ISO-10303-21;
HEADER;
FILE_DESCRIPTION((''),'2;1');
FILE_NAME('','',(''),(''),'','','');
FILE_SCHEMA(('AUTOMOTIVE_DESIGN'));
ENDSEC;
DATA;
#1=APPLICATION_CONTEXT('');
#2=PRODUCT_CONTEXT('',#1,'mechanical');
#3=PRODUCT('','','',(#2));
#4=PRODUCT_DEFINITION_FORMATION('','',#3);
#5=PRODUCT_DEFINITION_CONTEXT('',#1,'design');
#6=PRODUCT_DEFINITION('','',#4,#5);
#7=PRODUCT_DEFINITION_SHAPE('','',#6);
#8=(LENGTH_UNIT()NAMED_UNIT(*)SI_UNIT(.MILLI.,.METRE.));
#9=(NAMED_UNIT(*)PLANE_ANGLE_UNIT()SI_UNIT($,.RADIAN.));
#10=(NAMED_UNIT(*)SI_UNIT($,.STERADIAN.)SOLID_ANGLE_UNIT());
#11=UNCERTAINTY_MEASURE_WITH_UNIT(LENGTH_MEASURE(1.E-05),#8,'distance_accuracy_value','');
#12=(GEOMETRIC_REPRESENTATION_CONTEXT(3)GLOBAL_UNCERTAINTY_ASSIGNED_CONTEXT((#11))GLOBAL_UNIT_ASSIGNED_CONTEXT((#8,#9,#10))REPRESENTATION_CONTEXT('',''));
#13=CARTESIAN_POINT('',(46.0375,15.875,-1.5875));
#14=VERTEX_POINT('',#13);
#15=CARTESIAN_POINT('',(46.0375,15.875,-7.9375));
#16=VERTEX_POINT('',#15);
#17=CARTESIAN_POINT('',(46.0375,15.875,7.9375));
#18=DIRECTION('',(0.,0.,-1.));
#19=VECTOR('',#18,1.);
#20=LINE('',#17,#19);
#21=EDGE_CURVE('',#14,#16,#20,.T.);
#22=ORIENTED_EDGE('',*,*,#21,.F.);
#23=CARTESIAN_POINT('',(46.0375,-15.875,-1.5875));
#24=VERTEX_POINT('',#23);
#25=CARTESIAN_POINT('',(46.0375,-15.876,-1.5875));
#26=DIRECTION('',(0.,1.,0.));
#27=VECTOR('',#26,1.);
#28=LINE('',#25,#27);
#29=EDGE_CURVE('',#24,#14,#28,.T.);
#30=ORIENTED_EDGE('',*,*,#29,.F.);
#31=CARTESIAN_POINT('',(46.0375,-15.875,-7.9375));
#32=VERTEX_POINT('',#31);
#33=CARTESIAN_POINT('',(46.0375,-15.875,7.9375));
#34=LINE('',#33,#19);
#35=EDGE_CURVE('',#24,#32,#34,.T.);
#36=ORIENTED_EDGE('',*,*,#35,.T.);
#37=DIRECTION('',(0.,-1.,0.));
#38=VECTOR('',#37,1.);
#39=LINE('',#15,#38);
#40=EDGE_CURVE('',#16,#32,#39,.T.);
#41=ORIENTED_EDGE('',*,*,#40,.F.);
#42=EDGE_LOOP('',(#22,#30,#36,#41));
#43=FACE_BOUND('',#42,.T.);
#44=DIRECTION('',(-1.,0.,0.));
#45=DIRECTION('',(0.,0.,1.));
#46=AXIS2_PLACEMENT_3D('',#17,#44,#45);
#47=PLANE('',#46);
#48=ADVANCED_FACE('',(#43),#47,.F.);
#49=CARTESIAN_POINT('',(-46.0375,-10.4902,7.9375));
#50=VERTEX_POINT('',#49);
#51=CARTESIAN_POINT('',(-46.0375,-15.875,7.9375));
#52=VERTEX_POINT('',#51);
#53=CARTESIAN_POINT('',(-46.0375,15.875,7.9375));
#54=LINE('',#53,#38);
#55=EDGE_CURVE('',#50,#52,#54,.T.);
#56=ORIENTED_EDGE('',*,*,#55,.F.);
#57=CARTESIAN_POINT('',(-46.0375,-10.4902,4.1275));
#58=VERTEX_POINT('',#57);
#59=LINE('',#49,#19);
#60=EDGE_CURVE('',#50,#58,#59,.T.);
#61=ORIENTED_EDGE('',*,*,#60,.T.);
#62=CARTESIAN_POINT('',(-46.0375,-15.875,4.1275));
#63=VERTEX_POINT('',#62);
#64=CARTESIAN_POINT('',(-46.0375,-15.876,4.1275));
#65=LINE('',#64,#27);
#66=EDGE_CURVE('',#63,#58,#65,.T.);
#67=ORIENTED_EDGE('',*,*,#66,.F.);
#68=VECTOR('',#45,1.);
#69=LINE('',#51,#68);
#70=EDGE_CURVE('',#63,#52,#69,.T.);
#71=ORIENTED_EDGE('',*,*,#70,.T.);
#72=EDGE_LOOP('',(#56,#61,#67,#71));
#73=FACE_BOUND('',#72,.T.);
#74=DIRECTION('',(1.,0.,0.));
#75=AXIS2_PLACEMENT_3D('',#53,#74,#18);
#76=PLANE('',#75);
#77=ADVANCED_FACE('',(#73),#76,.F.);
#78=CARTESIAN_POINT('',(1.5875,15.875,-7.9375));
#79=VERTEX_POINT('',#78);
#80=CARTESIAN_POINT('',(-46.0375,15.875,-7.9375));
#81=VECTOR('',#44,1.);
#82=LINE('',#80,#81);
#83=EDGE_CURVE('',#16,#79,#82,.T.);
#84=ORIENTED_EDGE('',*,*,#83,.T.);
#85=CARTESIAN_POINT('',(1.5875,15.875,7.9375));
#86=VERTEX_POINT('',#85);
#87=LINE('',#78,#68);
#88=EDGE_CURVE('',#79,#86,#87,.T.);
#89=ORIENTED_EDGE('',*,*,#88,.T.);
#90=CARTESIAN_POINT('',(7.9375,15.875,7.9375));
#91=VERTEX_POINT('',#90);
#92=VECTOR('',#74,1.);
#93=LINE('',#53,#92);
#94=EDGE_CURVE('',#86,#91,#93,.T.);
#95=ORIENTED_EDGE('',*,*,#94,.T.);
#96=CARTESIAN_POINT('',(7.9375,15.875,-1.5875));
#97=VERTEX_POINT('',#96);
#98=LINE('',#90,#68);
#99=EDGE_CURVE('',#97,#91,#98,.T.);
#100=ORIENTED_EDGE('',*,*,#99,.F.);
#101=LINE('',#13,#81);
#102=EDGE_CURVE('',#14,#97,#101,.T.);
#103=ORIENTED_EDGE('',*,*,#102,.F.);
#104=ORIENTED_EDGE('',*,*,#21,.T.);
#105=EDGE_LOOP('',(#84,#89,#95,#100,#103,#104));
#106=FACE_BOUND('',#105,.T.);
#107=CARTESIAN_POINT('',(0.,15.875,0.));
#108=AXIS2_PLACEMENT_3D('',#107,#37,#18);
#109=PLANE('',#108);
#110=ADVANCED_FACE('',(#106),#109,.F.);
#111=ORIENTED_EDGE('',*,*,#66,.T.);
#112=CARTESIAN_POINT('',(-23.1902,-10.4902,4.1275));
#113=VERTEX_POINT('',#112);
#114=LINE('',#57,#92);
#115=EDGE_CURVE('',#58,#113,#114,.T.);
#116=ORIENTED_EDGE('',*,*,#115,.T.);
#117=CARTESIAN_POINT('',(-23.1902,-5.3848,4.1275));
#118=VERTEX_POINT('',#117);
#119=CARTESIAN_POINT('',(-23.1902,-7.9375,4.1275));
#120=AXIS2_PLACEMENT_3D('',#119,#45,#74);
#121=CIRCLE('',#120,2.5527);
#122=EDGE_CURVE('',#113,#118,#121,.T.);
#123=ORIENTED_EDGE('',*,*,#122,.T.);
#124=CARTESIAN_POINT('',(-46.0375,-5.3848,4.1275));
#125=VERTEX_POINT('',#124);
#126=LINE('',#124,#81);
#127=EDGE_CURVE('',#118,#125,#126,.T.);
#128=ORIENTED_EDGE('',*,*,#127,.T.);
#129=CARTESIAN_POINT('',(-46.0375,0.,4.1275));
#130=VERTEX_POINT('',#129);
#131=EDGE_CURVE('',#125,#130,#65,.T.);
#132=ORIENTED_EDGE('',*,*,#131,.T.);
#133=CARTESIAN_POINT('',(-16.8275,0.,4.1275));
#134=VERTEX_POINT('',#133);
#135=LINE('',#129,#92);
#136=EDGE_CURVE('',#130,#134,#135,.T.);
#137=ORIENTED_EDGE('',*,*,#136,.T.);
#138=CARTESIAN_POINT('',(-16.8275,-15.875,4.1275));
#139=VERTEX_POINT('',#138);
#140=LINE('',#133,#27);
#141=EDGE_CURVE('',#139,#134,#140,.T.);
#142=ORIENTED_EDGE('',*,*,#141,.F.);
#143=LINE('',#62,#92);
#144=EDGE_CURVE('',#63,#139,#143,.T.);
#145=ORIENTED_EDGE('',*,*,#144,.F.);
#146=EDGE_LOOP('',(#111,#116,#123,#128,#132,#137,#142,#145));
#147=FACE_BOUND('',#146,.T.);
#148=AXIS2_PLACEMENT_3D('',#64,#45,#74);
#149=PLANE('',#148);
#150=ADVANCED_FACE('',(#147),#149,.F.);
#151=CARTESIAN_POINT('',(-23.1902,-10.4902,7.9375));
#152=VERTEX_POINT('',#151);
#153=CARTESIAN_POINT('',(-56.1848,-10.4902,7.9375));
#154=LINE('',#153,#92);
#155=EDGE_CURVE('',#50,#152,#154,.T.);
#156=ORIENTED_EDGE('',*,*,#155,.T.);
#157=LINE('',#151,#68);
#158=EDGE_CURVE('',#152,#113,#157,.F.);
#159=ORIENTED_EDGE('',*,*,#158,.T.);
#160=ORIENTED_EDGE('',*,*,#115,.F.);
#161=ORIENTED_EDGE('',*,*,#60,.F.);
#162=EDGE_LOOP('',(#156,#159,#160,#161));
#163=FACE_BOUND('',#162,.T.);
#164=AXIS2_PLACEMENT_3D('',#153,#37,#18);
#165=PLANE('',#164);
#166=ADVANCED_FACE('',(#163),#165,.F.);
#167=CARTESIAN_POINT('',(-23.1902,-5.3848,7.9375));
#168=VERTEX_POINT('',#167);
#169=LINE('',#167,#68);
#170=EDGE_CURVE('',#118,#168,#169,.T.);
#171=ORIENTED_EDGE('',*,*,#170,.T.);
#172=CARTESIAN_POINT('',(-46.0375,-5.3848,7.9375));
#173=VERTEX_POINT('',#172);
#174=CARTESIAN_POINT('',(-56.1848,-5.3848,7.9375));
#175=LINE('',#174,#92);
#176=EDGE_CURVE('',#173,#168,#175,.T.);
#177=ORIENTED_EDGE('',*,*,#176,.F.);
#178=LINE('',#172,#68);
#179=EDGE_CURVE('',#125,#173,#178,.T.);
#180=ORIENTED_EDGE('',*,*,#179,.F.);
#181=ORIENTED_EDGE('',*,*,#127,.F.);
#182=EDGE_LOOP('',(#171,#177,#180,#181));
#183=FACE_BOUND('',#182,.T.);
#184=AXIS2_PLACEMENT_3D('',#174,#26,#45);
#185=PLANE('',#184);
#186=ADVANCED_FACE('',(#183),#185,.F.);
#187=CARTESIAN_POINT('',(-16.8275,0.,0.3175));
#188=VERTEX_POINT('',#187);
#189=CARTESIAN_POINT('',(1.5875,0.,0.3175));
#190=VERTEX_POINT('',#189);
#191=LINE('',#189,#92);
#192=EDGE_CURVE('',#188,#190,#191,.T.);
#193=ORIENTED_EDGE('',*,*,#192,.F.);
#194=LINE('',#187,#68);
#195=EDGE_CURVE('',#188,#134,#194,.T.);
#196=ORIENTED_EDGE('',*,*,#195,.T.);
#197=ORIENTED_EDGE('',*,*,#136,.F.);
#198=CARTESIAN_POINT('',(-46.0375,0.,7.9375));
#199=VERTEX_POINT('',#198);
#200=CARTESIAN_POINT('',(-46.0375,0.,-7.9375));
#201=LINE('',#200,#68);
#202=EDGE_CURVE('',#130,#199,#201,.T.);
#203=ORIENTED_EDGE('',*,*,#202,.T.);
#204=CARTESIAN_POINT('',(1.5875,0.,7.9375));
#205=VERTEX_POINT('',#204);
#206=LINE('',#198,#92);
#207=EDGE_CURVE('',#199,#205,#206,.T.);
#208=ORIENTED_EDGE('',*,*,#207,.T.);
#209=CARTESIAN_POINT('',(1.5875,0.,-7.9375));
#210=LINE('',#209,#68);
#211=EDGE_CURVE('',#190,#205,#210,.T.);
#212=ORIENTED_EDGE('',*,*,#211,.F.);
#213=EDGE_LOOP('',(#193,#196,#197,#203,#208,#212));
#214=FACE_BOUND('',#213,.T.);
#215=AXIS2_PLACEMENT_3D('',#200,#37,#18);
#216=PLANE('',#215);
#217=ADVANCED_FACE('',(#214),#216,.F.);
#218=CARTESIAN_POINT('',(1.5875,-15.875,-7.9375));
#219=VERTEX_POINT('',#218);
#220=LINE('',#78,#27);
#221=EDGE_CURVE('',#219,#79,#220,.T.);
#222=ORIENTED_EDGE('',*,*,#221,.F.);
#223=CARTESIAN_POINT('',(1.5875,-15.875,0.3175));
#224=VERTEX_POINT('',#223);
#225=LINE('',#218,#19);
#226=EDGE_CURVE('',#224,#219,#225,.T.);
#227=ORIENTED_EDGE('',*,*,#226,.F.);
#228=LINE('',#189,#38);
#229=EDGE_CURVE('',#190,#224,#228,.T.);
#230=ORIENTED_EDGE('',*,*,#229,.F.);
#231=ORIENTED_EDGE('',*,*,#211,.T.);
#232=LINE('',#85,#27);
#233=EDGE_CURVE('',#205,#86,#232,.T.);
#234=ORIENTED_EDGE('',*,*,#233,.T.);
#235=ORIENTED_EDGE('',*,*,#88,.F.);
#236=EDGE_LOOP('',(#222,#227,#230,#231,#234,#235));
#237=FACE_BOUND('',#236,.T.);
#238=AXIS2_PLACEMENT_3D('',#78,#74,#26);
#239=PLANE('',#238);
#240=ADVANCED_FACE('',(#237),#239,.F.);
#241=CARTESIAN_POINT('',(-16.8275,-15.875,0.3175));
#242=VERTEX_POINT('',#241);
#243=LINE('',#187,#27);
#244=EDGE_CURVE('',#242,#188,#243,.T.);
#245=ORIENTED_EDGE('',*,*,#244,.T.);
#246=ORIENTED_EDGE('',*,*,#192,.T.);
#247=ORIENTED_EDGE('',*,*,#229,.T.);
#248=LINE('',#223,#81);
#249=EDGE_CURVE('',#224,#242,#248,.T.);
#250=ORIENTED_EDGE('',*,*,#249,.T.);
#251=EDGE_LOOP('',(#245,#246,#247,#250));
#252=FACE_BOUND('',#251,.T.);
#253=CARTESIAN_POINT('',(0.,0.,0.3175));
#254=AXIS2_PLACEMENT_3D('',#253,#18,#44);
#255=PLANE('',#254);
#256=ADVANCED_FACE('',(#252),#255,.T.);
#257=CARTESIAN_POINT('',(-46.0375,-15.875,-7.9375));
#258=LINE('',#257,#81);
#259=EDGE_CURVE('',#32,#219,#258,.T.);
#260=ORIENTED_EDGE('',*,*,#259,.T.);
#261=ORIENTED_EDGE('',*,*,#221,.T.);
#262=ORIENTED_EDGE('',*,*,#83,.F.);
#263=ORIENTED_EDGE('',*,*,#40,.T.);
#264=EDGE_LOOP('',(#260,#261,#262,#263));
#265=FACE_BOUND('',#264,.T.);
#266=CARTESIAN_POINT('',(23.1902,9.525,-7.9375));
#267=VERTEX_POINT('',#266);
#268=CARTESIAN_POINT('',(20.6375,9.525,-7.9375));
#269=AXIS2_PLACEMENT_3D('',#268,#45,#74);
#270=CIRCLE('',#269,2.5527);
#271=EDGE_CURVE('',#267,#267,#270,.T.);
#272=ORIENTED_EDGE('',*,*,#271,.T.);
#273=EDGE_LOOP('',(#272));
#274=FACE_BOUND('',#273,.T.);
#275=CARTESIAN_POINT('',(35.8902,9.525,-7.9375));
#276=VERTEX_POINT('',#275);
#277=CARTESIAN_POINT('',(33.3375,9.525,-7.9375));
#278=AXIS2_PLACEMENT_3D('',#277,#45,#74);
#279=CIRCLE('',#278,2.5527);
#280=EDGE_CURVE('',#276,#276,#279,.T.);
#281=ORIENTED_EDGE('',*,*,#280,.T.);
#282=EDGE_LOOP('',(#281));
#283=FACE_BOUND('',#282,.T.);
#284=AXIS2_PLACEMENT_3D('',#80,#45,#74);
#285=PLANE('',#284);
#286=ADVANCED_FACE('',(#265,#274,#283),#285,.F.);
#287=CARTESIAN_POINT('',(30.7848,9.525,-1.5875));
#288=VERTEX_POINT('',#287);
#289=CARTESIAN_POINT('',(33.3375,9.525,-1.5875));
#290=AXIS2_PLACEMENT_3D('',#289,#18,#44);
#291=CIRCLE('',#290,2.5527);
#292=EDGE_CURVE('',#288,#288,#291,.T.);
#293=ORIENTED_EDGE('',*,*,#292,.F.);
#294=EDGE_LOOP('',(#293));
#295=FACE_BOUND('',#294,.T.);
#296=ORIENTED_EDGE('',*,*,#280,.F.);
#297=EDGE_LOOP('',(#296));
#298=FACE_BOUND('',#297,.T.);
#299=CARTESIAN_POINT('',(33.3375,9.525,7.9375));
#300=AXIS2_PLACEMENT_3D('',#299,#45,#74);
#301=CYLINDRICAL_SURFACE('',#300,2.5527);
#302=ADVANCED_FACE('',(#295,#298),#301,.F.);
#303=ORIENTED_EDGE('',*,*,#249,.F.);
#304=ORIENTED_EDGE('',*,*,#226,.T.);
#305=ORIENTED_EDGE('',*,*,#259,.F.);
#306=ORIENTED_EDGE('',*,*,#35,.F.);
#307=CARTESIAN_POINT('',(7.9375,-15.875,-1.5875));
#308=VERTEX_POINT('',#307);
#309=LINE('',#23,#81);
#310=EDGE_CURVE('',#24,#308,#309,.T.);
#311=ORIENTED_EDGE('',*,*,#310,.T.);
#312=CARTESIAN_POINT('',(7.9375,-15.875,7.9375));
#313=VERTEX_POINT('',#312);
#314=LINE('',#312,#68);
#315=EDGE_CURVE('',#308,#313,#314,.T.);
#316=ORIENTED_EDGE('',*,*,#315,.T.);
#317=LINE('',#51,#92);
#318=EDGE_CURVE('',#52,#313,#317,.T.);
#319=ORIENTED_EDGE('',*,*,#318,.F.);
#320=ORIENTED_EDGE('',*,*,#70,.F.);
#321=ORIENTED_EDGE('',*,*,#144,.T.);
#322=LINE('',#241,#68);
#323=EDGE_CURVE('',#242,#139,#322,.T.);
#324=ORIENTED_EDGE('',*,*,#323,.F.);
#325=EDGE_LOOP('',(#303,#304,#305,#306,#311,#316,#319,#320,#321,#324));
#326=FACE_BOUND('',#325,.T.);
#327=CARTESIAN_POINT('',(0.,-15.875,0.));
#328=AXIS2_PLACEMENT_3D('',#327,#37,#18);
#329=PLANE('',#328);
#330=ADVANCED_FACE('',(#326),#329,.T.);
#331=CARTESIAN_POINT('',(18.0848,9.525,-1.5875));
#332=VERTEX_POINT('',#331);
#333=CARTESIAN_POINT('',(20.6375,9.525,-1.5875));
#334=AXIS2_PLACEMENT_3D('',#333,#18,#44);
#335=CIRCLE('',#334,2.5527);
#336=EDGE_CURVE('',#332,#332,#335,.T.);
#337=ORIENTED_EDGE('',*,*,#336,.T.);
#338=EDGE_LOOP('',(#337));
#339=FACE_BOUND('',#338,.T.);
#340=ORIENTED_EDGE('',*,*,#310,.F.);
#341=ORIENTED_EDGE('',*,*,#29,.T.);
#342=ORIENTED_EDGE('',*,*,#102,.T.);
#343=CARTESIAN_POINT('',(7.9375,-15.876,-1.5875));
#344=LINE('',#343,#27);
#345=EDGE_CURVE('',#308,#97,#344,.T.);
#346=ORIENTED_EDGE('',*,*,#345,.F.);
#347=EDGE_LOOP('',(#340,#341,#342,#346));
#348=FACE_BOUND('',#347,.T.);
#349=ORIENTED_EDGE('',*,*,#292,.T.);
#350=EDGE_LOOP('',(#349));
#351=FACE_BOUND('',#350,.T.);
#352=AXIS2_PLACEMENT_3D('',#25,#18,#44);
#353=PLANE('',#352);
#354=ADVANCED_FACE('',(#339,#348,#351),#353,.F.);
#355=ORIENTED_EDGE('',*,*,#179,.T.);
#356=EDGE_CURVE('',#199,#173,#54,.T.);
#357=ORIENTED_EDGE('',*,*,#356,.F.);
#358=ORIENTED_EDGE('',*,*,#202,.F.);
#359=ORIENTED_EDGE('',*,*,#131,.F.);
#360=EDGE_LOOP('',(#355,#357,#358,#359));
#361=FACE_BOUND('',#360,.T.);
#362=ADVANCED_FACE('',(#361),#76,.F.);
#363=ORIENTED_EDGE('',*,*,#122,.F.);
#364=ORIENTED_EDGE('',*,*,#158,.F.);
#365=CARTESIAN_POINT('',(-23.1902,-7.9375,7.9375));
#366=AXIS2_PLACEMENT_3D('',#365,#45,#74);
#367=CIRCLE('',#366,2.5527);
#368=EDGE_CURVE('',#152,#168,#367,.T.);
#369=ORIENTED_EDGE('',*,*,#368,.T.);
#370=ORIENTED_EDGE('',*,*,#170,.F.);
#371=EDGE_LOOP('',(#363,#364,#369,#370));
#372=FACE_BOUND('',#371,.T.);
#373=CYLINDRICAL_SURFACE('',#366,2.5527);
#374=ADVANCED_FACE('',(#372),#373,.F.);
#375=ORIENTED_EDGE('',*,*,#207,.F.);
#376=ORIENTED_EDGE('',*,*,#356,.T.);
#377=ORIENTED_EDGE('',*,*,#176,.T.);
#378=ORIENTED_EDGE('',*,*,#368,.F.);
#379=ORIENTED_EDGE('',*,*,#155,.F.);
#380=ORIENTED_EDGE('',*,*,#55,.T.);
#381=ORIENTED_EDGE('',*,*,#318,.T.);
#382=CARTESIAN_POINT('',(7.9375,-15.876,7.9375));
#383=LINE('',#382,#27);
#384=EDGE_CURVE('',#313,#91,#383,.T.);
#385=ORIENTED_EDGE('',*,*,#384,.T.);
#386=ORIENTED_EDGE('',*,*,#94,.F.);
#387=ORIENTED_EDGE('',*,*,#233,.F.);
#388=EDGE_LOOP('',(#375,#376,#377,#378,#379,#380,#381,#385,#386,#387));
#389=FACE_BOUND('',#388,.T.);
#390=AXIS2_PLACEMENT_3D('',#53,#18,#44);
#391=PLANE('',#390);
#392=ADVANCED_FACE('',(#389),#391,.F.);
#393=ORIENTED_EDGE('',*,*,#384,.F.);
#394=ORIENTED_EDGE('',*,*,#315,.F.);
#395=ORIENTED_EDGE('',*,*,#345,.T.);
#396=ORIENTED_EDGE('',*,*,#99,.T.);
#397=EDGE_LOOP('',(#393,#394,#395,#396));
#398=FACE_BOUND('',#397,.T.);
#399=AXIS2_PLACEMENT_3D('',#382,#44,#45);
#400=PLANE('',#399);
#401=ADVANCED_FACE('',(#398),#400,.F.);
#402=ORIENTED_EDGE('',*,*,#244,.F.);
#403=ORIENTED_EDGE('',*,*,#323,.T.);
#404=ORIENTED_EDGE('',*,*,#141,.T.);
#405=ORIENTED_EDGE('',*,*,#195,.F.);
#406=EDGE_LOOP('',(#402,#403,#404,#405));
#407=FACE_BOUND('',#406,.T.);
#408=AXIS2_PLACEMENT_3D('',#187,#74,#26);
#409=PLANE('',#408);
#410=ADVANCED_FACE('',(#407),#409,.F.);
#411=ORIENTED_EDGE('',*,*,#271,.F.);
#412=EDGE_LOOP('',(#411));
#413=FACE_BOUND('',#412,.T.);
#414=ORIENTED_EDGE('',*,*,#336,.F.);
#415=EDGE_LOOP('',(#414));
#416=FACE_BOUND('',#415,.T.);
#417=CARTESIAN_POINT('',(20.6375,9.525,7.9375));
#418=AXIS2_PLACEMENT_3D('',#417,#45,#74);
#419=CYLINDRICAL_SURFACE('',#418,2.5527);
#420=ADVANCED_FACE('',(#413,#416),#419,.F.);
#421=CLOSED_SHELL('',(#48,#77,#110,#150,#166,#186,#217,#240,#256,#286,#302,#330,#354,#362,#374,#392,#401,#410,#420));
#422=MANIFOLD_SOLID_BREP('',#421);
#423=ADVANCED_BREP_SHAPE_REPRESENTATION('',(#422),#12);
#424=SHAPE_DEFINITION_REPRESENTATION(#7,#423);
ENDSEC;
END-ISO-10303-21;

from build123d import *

# Parameters (mm, degrees)
SKETCH1_W                        = 92.075
SKETCH1_H                        = 15.875
BOSS_EXTRUDE1_DEPTH              = 15.875
SKETCH2_W                        = 47.625
SKETCH2_H                        = 15.875
CUT_EXTRUDE1_DEPTH               = 52.219943931
F_10_0_1935_DIAMETER_HOLE1_D     = 5.1054
F_10_START                       = -7.9375
F_10_0_1935_DIAMETER_SLOT1_DEPTH = 15.875
CUT_EXTRUDE2_REACH               = 51.34
SKETCH7_W                        = 47.625
SKETCH7_H                        = 12.065
CUT_EXTRUDE3_REACH               = 58.485
SKETCH8_W                        = 38.1
SKETCH8_H                        = 9.525
SKETCH9_W                        = 18.415
SKETCH9_H                        = 15.875
BOSS_EXTRUDE2_DEPTH              = 3.81


# Read off the part's stored shape, not the designer's step: #10 (0.1935) Diameter Slot1
with BuildPart() as part:
    # Sketch1 → Boss-Extrude1 (new, symmetric)
    with BuildSketch(Plane(origin=(0, 0, 0), x_dir=(1, 0, 0), z_dir=(0, 1, 0))):
        Rectangle(SKETCH1_W, SKETCH1_H)
    extrude(amount=BOSS_EXTRUDE1_DEPTH, both=True)

    # Sketch2 → Cut-Extrude1 (cut, through all)
    with BuildSketch(Plane.XY.offset(7.9375)):
        with Locations((-22.225, 7.9375)):
            Rectangle(SKETCH2_W, SKETCH2_H)
    extrude(amount=-CUT_EXTRUDE1_DEPTH, mode=Mode.SUBTRACT)

    # #10 (0.1935) Diameter Hole1 (through all)
    with Locations(Plane.XY.offset(7.9375)):
        with Locations((33.3375, 9.525), (20.6375, 9.525)):
            Hole(F_10_0_1935_DIAMETER_HOLE1_D / 2)

    # #10 (0.1935) Diameter Slot1 outline → #10 (0.1935) Diameter Slot1 (cut)
    with BuildSketch(Plane.XY.offset(F_10_START)):
        with BuildLine():
            ThreePointArc((-23.1902, -10.4902), (-20.6375, -7.9375), (-23.1902, -5.3848))
            Line((-23.1902, -5.3848), (-46.0375, -5.3848))
            Line((-46.0375, -5.3848), (-46.0375, -10.4902))
            Line((-46.0375, -10.4902), (-23.1902, -10.4902))
        make_face()
    extrude(amount=F_10_0_1935_DIAMETER_SLOT1_DEPTH, mode=Mode.SUBTRACT)

    # Sketch7 → Cut-Extrude2 (cut, up to next)
    with BuildSketch(Plane(origin=(0, 0, 0), x_dir=(1, 0, 0), z_dir=(0, 1, 0)), mode=Mode.PRIVATE) as cut_extrude2_sk1:
        with Locations((-22.225, 1.905)):
            Rectangle(SKETCH7_W, SKETCH7_H)
    cut_extrude2_tool1 = extrude(cut_extrude2_sk1.sketch, amount=-CUT_EXTRUDE2_REACH, mode=Mode.PRIVATE) & part.part
    add(cut_extrude2_tool1.solids().sort_by_distance((-22.225, 0, -1.905))[0], mode=Mode.SUBTRACT)

    # Sketch8 → Cut-Extrude3 (cut, up to next)
    with BuildSketch(Plane(origin=(0, 15.875, 0), x_dir=(1, 0, 0), z_dir=(0, 1, 0)), mode=Mode.PRIVATE) as cut_extrude3_sk1:
        with Locations((26.9875, -3.175)):
            Rectangle(SKETCH8_W, SKETCH8_H)
    cut_extrude3_tool1 = extrude(cut_extrude3_sk1.sketch, amount=-CUT_EXTRUDE3_REACH, mode=Mode.PRIVATE) & part.part
    add(cut_extrude3_tool1.solids().sort_by_distance((26.9875, 15.875, 3.175))[0], mode=Mode.SUBTRACT)

    # Sketch9 → Boss-Extrude2 (add)
    with BuildSketch(Plane(origin=(0, 0, 4.1275), x_dir=(-1, 0, 0), z_dir=(0, 0, -1))):
        with Locations((7.62, -7.9375)):
            Rectangle(SKETCH9_W, SKETCH9_H)
    extrude(amount=BOSS_EXTRUDE2_DEPTH)


solid = part.part
